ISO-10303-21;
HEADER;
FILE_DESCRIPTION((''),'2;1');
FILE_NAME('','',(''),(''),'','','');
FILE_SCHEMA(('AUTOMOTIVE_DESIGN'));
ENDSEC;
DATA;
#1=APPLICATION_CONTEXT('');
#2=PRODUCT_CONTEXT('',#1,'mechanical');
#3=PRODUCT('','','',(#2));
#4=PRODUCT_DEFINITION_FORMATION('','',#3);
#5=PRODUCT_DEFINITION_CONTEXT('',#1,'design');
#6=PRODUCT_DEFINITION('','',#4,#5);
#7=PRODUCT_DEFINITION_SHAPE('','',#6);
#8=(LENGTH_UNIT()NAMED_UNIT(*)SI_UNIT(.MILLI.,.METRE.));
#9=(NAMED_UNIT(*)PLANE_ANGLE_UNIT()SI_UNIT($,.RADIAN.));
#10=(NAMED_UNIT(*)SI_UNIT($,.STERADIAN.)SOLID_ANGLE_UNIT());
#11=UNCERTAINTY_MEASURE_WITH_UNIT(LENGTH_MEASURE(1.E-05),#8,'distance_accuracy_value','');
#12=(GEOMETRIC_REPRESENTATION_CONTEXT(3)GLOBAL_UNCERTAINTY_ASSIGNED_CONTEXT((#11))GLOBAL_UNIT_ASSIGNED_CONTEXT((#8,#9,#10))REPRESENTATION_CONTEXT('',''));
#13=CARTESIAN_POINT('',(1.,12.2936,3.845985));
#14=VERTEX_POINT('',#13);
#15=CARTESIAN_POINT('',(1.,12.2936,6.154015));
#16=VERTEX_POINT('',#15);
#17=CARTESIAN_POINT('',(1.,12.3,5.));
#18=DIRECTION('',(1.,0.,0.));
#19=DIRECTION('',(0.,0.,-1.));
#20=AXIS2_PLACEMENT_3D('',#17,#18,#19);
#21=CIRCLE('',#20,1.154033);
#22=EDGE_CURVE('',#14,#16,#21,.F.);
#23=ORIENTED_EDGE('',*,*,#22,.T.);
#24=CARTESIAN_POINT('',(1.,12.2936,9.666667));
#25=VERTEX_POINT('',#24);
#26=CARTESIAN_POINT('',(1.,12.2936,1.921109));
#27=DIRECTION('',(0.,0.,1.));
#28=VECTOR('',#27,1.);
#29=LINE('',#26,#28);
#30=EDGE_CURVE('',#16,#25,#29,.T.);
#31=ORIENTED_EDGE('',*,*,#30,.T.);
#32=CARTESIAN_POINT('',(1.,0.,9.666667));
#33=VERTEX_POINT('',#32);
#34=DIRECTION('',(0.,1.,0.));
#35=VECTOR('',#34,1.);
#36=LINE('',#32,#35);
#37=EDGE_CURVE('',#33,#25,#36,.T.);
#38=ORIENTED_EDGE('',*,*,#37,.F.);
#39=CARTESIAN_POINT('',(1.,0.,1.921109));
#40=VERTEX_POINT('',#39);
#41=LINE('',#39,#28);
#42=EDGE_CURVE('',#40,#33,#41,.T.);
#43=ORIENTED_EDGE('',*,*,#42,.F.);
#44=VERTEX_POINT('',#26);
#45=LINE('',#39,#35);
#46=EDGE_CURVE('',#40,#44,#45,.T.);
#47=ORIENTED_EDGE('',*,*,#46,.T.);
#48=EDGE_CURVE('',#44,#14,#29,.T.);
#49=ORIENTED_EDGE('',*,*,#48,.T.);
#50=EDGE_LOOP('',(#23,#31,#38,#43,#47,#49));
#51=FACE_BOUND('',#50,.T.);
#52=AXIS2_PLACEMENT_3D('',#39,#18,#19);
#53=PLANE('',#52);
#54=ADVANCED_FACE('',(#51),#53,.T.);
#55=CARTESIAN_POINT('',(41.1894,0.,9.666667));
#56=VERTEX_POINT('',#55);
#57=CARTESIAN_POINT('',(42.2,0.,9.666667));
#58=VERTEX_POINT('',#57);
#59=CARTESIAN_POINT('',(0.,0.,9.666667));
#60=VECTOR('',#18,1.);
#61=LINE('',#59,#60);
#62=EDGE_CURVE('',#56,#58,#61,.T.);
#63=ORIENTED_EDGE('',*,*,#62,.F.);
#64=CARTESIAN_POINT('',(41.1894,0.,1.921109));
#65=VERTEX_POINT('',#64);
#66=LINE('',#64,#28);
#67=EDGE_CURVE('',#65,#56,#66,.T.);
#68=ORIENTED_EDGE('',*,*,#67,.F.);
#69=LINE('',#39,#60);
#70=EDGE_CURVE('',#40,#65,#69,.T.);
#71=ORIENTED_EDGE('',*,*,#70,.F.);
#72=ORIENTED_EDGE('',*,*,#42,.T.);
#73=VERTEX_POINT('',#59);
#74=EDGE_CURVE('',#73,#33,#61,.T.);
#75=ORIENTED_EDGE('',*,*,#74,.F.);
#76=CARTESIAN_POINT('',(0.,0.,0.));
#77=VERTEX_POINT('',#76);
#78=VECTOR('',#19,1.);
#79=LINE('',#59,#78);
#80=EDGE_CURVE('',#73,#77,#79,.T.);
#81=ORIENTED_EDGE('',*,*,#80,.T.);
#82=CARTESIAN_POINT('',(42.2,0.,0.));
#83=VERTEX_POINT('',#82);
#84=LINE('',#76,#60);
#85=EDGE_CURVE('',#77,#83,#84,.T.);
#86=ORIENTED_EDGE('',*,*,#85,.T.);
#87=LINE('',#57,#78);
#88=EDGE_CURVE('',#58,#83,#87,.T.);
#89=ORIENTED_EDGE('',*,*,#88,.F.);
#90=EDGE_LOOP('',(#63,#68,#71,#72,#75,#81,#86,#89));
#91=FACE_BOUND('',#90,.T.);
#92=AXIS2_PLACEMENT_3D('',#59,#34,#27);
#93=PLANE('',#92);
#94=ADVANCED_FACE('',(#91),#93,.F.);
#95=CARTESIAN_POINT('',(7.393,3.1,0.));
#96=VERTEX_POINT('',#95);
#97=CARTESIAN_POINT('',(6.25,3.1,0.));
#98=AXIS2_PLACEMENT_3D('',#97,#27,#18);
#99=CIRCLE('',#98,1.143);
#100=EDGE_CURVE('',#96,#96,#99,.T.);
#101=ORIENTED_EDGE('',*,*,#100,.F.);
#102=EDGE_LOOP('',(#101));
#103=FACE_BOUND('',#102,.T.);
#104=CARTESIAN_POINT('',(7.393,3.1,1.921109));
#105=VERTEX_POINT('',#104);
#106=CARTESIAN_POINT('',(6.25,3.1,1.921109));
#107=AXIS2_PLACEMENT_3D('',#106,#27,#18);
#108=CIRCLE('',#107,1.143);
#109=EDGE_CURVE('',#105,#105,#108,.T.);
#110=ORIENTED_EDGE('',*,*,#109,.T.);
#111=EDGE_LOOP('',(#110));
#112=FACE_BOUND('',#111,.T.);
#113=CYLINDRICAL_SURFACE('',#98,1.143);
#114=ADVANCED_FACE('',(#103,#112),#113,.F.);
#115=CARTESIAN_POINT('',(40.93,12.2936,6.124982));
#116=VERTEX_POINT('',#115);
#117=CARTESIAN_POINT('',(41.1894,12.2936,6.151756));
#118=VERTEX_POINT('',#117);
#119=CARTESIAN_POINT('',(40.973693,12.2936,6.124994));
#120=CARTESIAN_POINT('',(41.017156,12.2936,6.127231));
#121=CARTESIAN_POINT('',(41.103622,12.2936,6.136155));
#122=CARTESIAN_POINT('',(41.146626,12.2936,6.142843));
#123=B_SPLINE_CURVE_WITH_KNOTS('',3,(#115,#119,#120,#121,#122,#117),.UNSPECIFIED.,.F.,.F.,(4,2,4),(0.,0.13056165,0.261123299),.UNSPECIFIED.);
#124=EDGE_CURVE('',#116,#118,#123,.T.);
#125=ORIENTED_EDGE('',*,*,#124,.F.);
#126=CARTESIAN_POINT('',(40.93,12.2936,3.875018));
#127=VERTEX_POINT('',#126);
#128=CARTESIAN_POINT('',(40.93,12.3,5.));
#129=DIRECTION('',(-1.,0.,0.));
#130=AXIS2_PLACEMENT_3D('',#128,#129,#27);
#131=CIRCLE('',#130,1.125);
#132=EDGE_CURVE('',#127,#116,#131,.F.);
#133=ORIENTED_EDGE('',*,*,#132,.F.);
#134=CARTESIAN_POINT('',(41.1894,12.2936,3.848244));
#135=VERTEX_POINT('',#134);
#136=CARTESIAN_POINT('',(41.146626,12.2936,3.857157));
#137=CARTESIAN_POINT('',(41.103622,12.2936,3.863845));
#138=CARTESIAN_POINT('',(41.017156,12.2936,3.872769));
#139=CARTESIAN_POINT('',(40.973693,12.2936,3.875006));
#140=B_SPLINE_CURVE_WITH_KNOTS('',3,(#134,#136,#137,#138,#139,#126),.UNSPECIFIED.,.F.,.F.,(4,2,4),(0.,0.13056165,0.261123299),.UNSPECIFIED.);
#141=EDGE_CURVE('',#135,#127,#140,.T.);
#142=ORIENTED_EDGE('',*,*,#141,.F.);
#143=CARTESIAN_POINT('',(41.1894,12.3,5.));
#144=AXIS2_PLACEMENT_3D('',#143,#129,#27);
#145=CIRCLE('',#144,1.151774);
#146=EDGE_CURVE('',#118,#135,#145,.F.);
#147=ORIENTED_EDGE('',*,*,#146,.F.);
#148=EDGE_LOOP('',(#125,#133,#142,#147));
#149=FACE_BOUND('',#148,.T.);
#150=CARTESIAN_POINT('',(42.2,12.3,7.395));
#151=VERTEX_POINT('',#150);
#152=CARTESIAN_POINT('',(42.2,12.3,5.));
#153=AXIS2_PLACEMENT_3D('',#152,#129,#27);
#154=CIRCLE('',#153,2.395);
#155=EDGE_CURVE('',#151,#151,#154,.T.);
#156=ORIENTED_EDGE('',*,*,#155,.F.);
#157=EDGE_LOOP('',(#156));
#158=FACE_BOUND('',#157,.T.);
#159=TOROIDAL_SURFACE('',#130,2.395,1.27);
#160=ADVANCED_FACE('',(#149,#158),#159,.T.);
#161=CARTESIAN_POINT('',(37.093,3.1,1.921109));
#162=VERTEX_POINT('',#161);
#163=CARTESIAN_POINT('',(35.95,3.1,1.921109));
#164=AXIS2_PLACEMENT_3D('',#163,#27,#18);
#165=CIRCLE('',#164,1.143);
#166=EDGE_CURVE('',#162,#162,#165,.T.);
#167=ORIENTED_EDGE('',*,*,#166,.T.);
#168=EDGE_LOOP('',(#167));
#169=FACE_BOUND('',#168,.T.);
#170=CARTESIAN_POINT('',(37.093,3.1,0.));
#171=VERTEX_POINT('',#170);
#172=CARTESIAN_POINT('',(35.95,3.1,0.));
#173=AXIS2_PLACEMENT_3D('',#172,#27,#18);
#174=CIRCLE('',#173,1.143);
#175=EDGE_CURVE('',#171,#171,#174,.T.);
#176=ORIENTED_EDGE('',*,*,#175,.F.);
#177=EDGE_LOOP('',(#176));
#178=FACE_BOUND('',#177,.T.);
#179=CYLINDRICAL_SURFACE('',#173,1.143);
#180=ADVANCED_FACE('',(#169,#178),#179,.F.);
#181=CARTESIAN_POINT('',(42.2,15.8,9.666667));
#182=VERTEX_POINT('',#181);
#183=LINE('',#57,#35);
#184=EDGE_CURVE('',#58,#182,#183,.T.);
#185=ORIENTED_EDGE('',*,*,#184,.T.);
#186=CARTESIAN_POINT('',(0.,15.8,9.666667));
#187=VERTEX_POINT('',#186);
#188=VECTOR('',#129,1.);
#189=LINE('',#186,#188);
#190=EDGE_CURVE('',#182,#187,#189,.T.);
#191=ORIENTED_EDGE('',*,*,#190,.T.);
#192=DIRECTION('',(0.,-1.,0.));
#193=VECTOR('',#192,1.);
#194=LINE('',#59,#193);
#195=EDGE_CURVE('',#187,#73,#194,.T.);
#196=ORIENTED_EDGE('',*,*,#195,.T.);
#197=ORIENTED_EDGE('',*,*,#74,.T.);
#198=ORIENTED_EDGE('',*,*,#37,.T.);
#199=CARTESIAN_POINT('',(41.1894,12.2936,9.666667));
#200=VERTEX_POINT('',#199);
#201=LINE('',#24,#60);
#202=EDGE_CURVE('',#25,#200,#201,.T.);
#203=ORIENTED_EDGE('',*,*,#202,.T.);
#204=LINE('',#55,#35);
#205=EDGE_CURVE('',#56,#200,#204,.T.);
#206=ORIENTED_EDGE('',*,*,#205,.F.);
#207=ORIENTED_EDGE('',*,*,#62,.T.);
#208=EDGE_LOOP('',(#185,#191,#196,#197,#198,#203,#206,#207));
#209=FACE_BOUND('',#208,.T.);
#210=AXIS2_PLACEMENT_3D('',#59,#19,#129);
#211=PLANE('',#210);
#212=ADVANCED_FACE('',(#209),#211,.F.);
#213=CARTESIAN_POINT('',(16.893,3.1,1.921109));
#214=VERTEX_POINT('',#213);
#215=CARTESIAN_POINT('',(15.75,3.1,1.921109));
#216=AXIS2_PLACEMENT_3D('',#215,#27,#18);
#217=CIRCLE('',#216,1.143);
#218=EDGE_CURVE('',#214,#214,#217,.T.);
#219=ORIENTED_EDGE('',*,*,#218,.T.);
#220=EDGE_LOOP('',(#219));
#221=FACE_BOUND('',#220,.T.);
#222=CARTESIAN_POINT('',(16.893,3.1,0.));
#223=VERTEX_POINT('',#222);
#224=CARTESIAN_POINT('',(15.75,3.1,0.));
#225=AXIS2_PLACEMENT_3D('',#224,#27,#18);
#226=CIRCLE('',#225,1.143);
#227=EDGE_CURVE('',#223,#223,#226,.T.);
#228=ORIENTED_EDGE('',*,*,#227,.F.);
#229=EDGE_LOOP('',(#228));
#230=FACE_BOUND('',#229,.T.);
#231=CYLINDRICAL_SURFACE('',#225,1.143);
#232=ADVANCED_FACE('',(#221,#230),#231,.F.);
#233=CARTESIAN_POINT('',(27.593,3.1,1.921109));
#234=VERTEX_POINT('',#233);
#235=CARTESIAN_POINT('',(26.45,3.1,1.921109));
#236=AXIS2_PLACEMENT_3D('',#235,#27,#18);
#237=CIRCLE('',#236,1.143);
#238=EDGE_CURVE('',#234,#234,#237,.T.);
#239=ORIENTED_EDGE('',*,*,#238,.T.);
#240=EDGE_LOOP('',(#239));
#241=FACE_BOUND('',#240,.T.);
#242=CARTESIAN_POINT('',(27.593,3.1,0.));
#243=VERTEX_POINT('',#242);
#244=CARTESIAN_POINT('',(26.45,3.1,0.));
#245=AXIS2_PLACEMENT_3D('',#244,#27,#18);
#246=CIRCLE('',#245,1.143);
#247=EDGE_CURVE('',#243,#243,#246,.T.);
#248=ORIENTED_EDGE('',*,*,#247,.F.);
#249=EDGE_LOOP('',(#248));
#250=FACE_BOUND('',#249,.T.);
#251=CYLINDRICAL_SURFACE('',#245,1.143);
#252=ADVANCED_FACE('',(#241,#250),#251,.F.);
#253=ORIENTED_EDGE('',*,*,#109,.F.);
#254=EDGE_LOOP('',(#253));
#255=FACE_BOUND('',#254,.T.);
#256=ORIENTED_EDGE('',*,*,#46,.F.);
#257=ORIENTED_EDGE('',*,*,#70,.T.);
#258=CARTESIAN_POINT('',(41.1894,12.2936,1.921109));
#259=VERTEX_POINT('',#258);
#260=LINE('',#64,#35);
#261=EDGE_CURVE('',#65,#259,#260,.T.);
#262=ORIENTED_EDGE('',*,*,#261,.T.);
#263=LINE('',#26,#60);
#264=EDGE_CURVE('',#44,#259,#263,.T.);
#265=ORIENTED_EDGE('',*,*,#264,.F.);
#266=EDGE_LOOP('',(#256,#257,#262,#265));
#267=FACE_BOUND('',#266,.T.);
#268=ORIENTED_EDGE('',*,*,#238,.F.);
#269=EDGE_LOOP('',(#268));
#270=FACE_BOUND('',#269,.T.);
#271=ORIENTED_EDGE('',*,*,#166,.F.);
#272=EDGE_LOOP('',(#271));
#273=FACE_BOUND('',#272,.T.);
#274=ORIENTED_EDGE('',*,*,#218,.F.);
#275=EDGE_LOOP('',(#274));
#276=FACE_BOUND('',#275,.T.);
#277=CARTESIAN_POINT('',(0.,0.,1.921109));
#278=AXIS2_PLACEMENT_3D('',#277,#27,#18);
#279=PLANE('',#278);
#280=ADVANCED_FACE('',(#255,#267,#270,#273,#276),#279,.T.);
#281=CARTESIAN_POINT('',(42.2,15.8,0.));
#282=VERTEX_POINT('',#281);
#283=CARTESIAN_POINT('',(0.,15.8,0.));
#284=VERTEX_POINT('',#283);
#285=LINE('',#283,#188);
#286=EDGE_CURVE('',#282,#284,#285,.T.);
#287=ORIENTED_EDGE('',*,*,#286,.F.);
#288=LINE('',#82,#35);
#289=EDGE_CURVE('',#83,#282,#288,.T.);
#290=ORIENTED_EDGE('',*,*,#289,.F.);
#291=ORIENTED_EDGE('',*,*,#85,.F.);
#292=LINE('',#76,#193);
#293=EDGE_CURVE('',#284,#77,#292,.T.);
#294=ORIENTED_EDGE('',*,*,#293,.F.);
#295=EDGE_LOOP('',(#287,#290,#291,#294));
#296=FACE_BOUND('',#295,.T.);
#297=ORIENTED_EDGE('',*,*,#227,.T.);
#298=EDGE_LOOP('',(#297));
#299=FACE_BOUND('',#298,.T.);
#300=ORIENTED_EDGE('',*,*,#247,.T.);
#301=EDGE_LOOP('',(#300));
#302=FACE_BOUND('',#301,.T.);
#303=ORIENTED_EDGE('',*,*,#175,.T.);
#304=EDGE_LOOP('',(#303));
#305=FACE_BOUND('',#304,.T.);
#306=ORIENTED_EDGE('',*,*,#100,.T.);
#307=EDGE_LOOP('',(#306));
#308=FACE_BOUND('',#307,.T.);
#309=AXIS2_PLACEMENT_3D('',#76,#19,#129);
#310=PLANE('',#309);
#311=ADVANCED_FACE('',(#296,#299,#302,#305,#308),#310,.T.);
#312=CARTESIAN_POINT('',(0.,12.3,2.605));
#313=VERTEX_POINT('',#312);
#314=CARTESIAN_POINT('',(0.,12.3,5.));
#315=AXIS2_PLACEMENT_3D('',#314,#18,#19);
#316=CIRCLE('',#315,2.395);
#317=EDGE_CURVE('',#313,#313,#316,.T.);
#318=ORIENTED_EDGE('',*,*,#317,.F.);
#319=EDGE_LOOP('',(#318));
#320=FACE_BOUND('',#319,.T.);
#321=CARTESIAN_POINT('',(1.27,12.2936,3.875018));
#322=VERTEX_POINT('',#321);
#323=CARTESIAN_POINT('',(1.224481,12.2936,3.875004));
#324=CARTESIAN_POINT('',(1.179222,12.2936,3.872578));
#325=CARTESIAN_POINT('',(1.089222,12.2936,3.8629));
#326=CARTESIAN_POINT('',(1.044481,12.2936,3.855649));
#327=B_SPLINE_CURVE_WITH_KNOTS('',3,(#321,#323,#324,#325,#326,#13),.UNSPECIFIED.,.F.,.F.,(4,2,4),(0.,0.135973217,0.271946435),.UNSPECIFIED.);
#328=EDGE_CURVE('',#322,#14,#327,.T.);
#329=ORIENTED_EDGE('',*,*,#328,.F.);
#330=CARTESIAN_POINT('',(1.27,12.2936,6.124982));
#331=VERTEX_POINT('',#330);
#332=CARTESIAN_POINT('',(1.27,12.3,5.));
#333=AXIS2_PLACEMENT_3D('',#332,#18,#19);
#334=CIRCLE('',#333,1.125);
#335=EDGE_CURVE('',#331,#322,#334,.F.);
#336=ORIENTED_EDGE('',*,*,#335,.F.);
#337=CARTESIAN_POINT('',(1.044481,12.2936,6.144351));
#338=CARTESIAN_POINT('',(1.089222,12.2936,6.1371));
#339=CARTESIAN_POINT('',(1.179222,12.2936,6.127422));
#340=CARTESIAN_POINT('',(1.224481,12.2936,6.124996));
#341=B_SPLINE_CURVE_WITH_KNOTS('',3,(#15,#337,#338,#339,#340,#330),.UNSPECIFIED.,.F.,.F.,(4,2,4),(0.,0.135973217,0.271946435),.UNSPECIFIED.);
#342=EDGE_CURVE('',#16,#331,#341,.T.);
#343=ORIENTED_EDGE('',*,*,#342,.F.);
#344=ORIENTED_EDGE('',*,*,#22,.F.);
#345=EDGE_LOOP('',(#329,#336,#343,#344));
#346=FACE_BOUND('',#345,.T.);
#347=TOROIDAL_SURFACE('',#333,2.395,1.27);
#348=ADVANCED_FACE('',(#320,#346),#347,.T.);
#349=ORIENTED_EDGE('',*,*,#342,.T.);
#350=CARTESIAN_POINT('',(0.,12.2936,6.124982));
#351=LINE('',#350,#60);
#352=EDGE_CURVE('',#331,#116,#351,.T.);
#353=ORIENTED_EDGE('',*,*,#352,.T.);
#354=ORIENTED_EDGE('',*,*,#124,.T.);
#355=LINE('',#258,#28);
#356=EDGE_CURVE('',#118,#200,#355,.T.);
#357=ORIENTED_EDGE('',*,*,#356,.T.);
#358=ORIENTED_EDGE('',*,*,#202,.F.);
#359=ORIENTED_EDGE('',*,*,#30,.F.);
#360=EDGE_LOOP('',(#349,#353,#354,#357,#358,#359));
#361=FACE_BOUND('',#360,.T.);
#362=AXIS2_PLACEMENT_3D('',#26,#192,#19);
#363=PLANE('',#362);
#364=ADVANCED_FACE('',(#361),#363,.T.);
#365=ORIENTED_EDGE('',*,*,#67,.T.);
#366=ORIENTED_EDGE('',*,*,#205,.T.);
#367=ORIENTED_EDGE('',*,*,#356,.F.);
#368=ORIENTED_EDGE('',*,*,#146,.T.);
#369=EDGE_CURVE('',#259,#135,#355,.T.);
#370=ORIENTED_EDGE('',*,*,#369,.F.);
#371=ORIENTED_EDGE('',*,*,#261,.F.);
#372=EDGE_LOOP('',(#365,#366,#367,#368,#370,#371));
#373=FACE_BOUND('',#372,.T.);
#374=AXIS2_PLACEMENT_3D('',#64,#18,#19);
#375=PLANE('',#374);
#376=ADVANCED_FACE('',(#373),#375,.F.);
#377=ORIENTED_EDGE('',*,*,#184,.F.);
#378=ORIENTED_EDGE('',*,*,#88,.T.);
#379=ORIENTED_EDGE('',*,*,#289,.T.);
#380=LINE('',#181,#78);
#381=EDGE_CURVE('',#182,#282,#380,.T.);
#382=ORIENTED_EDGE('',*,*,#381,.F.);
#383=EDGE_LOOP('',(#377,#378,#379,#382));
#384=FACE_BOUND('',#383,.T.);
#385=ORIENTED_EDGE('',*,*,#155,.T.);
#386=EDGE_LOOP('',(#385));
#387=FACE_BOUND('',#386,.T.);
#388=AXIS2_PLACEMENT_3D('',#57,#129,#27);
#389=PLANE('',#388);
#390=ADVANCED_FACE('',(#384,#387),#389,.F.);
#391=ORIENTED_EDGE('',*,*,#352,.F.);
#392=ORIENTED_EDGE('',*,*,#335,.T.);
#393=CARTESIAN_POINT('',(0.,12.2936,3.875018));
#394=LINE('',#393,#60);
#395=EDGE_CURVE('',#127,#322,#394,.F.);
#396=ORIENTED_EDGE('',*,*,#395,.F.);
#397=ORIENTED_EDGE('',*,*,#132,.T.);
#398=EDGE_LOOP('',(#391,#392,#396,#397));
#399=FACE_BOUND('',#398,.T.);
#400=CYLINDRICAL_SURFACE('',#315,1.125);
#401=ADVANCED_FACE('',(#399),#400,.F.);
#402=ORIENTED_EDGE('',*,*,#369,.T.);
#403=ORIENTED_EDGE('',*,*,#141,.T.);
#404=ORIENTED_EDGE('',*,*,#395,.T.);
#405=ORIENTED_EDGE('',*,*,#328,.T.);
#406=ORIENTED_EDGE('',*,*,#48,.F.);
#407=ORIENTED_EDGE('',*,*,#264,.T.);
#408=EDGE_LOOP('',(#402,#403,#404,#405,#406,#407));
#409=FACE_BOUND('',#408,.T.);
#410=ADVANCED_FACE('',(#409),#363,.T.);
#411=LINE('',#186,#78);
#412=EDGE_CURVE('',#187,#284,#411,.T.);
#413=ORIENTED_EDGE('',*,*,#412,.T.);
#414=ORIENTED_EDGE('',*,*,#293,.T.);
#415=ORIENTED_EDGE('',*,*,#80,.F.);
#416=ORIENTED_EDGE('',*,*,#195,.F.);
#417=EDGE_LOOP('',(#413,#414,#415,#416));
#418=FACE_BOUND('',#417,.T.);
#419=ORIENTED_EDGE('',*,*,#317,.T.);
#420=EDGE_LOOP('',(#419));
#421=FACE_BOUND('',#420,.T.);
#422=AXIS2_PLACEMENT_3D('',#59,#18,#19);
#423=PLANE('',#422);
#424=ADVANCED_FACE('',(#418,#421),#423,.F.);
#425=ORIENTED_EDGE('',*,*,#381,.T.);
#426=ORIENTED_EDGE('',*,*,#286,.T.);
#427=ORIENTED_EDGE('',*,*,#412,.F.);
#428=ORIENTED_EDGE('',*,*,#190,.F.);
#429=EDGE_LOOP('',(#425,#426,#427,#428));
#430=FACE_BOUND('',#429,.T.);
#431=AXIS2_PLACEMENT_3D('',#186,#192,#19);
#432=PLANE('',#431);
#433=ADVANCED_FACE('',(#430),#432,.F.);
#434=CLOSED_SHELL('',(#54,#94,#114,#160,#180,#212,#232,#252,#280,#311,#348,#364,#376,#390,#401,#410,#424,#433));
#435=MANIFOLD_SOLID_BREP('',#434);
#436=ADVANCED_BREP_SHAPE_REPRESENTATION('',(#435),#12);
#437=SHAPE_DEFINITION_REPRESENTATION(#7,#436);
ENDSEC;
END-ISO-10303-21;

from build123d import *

# Parameters (mm, degrees)
SKETCH1_W               = 42.2
SKETCH1_H               = 15.8
BOSS_EXTRUDE1_DEPTH     = 9.666666667
CUT_EXTRUDE1_DEPTH      = 47.086054772
CUT_EXTRUDE1_DEPTH_BACK = 47.086054772
SKETCH2_R               = 1.125
SKETCH3_W               = 40.1894
SKETCH3_H               = 12.2936
CUT_EXTRUDE3_DEPTH      = 7.745557598
FILLET1_R               = 1.27
CUT_EXTRUDE4_DEPTH      = 46.721698049
CUT_EXTRUDE4_DEPTH_BACK = 46.721698049
SKETCH4_R               = 1.143


with BuildPart() as part:
    # Sketch1 → Boss-Extrude1 (new body)
    with BuildSketch(Plane.XY):
        with Locations((21.1, 7.9)):
            Rectangle(SKETCH1_W, SKETCH1_H)
    extrude(amount=BOSS_EXTRUDE1_DEPTH)

    # Sketch2 → Cut-Extrude1 (cut, two sides: drawn at the far end of the back side and taken through both)
    with BuildSketch(Plane(origin=(42.2, 0, 0), x_dir=(0, 0, -1), z_dir=(1, 0, 0)).offset(-CUT_EXTRUDE1_DEPTH_BACK)):
        with Locations((-5, 12.3)):
            Circle(SKETCH2_R)
    extrude(amount=CUT_EXTRUDE1_DEPTH + CUT_EXTRUDE1_DEPTH_BACK, mode=Mode.SUBTRACT)

    # Sketch3 → Cut-Extrude3 (cut)
    with BuildSketch(Plane.XY.offset(9.666666667)):
        with Locations((21.0947, 6.1468)):
            Rectangle(SKETCH3_W, SKETCH3_H)
    extrude(amount=-CUT_EXTRUDE3_DEPTH, mode=Mode.SUBTRACT)

    # Fillet1
    # the kernel refuses this fillet: 1.27 mm, written as the material it takes off along each edge
    with BuildSketch(Plane(origin=(0, 12.3, 5), x_dir=(0, 0, -1), z_dir=(0, -1, 0))) as fillet1_piece_1:
        with BuildLine():
            CenterArc((1.125 + FILLET1_R, FILLET1_R), FILLET1_R, 180, 90)
            Line((1.125, FILLET1_R), (1.125, 0))
            Line((1.125, 0), (1.125 + FILLET1_R, 0))
        make_face()
    revolve(axis=Axis((0, 12.3, 5), (1, 0, 0)), mode=Mode.SUBTRACT)
    with BuildSketch(Plane(origin=(42.2, 12.3, 5), x_dir=(0, 0, -1), z_dir=(0, -1, 0))) as fillet1_piece_2:
        with BuildLine():
            CenterArc((1.125 + FILLET1_R, -FILLET1_R), FILLET1_R, 90, 90)
            Line((1.125, -FILLET1_R), (1.125, 0))
            Line((1.125, 0), (1.125 + FILLET1_R, 0))
        make_face()
    revolve(axis=Axis((42.2, 12.3, 5), (1, 0, 0)), mode=Mode.SUBTRACT)

    # Sketch4 → Cut-Extrude4 (cut, two sides: drawn at the far end of the back side and taken through both)
    with BuildSketch(Plane.XY.offset(1.921109069).offset(-CUT_EXTRUDE4_DEPTH_BACK)):
        with Locations((6.25, 3.1)):
            Circle(SKETCH4_R)
        with Locations((15.75, 3.1)):
            Circle(SKETCH4_R)
        with Locations((26.45, 3.1)):
            Circle(SKETCH4_R)
        with Locations((35.95, 3.1)):
            Circle(SKETCH4_R)
    extrude(amount=CUT_EXTRUDE4_DEPTH + CUT_EXTRUDE4_DEPTH_BACK, mode=Mode.SUBTRACT)


solid = part.part
